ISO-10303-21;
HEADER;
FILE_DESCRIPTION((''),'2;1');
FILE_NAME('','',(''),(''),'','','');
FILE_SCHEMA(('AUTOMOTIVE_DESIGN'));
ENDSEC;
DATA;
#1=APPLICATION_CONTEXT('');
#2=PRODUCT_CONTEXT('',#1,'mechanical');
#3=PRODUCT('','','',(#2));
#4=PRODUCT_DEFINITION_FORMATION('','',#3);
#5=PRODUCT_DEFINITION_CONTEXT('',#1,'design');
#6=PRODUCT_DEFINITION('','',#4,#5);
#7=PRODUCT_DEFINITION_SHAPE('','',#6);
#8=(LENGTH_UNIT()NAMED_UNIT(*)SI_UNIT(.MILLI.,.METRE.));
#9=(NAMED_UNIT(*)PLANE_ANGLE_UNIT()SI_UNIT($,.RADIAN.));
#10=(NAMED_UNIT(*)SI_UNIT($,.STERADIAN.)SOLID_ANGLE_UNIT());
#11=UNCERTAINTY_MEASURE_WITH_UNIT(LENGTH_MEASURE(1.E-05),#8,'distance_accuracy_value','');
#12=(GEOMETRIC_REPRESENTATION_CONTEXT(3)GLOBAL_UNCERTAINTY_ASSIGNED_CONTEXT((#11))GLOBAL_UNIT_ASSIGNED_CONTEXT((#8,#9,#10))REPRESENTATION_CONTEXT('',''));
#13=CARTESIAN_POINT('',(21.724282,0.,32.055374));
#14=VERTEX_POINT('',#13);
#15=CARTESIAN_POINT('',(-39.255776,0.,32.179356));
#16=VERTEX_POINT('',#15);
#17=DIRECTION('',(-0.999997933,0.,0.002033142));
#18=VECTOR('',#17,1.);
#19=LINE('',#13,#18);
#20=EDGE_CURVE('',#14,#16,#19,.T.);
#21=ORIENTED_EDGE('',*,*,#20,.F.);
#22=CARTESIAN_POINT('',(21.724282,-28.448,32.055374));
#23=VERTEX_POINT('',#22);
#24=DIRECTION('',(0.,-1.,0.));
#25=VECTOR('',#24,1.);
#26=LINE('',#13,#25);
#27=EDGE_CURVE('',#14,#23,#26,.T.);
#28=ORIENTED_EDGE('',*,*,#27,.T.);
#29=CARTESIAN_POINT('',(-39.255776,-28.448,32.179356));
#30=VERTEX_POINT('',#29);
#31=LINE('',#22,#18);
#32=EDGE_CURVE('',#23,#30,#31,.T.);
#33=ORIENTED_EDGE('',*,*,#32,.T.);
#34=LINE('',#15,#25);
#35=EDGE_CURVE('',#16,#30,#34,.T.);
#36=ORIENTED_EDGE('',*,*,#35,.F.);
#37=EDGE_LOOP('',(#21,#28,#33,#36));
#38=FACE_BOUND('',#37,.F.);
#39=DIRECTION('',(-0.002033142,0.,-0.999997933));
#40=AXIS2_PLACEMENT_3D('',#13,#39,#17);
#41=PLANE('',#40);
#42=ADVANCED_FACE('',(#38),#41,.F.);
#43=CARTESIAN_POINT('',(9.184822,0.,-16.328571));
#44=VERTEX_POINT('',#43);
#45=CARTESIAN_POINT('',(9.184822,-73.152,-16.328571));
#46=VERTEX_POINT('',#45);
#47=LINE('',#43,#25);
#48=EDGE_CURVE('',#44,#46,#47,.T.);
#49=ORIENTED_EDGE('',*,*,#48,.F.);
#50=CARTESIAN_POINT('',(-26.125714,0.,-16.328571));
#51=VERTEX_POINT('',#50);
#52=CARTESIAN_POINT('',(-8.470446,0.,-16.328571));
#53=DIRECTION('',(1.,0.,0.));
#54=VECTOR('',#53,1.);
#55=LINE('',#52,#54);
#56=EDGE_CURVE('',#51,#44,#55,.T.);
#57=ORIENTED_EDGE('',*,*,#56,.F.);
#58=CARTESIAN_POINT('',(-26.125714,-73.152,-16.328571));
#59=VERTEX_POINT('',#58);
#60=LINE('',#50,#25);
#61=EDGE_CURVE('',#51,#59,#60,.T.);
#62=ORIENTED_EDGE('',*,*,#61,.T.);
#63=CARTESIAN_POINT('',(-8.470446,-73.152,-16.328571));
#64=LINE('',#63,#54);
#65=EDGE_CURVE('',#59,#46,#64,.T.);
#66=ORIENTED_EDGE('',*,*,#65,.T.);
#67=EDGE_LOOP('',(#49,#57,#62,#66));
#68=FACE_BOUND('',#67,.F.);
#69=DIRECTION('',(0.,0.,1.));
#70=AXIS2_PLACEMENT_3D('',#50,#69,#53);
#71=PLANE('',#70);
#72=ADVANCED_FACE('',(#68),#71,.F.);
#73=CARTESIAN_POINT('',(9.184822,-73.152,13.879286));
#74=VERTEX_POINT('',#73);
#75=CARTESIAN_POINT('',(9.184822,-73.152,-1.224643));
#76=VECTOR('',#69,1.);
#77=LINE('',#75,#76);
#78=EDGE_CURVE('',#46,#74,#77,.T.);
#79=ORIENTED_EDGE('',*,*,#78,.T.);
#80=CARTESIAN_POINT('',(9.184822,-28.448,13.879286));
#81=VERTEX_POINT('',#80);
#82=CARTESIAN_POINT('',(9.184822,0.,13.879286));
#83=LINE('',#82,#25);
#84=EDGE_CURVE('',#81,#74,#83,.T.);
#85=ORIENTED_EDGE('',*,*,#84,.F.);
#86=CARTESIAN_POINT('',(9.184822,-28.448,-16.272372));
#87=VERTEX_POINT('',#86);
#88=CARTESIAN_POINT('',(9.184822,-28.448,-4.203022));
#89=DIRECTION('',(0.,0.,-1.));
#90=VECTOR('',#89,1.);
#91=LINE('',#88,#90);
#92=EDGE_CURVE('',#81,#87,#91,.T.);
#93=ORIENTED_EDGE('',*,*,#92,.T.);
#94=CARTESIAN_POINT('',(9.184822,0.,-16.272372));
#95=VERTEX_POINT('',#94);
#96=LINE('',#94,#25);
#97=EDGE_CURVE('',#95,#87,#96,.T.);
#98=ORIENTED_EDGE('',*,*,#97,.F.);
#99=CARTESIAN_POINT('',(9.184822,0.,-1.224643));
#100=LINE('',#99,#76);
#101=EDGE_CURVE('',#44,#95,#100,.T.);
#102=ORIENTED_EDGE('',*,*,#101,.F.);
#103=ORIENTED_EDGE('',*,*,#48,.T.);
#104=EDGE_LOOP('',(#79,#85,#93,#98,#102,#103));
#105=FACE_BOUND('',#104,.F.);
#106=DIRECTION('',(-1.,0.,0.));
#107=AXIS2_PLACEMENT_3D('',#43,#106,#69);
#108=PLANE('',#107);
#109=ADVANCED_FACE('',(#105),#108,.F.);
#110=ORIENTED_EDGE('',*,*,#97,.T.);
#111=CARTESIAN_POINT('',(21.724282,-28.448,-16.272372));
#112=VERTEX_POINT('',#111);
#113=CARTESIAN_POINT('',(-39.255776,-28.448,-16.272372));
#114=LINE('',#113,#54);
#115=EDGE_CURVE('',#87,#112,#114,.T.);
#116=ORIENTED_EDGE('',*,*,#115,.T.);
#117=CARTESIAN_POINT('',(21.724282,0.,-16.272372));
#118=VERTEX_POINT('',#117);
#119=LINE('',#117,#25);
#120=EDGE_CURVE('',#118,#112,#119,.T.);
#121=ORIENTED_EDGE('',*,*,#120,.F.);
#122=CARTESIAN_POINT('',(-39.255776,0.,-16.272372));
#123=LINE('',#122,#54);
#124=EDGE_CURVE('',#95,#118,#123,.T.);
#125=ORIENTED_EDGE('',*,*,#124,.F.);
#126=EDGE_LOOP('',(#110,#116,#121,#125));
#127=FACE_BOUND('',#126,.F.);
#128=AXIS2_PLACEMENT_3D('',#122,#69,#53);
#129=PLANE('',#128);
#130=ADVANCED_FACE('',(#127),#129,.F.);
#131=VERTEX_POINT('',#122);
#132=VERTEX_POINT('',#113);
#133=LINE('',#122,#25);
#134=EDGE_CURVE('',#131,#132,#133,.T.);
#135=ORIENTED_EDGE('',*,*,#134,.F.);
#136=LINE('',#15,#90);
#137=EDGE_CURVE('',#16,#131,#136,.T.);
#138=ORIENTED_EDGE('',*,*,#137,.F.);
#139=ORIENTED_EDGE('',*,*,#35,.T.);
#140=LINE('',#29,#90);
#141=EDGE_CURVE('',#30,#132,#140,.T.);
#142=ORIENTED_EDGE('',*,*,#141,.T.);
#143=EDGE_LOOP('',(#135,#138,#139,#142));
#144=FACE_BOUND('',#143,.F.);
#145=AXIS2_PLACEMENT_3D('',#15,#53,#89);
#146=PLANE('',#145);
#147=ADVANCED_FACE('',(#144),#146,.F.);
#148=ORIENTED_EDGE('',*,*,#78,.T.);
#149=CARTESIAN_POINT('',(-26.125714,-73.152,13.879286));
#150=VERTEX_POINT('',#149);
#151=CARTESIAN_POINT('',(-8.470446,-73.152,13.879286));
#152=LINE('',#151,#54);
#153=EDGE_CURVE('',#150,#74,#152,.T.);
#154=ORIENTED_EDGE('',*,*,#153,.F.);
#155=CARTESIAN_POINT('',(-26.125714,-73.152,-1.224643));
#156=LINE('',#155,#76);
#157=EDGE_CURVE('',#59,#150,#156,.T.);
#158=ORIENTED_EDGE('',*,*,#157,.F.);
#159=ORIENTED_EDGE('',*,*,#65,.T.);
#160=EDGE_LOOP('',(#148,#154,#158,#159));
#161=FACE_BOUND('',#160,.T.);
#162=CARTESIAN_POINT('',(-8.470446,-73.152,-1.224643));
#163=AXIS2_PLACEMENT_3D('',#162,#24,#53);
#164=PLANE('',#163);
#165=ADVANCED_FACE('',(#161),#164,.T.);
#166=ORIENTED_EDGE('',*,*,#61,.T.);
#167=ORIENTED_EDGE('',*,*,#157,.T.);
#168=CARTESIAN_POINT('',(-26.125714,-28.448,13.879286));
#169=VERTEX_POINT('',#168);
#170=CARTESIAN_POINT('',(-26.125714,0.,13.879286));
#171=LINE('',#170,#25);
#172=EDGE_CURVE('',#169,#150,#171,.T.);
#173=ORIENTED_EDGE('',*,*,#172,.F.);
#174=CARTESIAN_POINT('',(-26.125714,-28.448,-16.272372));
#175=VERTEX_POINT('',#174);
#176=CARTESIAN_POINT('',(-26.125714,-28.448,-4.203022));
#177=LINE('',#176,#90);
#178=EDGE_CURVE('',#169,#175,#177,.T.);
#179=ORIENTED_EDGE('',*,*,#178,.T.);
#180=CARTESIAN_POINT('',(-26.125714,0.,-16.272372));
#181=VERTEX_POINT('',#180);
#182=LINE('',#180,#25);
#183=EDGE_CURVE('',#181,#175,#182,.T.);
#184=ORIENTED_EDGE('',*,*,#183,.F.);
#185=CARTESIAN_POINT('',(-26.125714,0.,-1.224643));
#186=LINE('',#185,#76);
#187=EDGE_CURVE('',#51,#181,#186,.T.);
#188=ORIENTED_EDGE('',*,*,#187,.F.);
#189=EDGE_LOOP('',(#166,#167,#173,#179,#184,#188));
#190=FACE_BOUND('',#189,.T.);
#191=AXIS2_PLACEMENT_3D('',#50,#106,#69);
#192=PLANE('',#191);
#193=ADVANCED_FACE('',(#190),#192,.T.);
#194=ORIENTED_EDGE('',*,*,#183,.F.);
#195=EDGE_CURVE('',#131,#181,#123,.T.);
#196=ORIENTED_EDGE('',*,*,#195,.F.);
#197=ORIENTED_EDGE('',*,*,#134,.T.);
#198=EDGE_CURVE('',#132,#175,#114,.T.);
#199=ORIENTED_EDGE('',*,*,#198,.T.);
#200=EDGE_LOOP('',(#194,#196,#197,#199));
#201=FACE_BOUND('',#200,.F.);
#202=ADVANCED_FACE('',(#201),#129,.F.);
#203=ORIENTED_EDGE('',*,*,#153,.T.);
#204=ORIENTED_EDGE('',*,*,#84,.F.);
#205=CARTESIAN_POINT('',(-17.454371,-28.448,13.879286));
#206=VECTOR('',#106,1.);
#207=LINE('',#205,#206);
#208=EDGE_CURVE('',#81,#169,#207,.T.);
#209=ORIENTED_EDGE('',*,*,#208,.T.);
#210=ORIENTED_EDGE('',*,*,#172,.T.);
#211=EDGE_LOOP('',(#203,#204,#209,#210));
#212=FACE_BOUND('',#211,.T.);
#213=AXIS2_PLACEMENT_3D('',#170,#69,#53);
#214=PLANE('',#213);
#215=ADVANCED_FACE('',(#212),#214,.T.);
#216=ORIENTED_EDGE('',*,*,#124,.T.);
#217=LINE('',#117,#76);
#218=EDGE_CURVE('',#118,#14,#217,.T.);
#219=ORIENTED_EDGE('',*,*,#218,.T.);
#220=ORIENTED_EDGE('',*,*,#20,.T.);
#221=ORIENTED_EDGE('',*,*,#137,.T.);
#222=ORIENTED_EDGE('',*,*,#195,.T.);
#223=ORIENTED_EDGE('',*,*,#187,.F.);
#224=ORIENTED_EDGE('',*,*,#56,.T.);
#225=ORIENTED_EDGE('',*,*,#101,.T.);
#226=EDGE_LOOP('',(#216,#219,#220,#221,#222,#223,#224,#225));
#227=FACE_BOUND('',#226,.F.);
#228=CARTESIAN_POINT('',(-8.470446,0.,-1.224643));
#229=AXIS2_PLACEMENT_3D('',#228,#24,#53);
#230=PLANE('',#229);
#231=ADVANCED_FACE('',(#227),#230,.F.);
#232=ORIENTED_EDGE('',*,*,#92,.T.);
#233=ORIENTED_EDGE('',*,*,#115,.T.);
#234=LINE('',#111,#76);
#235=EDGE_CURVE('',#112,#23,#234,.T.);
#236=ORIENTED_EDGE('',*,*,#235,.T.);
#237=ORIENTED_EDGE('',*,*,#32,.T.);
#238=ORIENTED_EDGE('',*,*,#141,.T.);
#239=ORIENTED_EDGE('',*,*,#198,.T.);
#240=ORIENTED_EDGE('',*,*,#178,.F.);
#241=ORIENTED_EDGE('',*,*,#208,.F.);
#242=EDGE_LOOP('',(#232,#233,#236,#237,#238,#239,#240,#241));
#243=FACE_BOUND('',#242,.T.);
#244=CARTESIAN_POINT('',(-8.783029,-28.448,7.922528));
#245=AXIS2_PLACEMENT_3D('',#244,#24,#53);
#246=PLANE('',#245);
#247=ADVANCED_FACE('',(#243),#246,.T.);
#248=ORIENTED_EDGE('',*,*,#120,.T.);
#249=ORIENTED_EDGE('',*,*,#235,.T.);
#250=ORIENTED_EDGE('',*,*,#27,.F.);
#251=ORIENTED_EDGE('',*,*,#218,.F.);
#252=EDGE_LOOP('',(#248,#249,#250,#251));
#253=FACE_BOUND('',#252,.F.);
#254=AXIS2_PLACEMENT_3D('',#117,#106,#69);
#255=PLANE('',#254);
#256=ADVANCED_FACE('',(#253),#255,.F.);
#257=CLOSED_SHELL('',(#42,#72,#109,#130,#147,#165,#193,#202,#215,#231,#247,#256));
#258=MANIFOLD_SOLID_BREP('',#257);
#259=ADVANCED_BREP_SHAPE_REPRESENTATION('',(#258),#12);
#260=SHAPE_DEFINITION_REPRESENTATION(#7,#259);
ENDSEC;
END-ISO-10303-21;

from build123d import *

# Parameters (mm, degrees)
F1_DEPTH = 28.448
F2_W     = 35.3105356917
F2_H     = 30.2078574896
F3_DEPTH = 73.152


# Not quite as in the source:
# - a feature names something its author has since deleted; it is built from what else it names


with BuildPart() as f1:
    # F0 (on Front) → F1 (new body)
    with BuildSketch(Plane.XZ):
        Polygon((21.7242818326, 32.0553742349), (-39.2557755113, 32.1793556213), (-39.2557755113, -16.2723716348), (21.7242818326, -16.2723716348), align=None)
    extrude(amount=F1_DEPTH)

    # F2 (on Front) → F3 (join)
    with BuildSketch(Plane.XZ):
        with Locations((-8.470446337, -1.2246426195)):
            Rectangle(F2_W, F2_H)
    extrude(amount=F3_DEPTH)


solid = f1.part
